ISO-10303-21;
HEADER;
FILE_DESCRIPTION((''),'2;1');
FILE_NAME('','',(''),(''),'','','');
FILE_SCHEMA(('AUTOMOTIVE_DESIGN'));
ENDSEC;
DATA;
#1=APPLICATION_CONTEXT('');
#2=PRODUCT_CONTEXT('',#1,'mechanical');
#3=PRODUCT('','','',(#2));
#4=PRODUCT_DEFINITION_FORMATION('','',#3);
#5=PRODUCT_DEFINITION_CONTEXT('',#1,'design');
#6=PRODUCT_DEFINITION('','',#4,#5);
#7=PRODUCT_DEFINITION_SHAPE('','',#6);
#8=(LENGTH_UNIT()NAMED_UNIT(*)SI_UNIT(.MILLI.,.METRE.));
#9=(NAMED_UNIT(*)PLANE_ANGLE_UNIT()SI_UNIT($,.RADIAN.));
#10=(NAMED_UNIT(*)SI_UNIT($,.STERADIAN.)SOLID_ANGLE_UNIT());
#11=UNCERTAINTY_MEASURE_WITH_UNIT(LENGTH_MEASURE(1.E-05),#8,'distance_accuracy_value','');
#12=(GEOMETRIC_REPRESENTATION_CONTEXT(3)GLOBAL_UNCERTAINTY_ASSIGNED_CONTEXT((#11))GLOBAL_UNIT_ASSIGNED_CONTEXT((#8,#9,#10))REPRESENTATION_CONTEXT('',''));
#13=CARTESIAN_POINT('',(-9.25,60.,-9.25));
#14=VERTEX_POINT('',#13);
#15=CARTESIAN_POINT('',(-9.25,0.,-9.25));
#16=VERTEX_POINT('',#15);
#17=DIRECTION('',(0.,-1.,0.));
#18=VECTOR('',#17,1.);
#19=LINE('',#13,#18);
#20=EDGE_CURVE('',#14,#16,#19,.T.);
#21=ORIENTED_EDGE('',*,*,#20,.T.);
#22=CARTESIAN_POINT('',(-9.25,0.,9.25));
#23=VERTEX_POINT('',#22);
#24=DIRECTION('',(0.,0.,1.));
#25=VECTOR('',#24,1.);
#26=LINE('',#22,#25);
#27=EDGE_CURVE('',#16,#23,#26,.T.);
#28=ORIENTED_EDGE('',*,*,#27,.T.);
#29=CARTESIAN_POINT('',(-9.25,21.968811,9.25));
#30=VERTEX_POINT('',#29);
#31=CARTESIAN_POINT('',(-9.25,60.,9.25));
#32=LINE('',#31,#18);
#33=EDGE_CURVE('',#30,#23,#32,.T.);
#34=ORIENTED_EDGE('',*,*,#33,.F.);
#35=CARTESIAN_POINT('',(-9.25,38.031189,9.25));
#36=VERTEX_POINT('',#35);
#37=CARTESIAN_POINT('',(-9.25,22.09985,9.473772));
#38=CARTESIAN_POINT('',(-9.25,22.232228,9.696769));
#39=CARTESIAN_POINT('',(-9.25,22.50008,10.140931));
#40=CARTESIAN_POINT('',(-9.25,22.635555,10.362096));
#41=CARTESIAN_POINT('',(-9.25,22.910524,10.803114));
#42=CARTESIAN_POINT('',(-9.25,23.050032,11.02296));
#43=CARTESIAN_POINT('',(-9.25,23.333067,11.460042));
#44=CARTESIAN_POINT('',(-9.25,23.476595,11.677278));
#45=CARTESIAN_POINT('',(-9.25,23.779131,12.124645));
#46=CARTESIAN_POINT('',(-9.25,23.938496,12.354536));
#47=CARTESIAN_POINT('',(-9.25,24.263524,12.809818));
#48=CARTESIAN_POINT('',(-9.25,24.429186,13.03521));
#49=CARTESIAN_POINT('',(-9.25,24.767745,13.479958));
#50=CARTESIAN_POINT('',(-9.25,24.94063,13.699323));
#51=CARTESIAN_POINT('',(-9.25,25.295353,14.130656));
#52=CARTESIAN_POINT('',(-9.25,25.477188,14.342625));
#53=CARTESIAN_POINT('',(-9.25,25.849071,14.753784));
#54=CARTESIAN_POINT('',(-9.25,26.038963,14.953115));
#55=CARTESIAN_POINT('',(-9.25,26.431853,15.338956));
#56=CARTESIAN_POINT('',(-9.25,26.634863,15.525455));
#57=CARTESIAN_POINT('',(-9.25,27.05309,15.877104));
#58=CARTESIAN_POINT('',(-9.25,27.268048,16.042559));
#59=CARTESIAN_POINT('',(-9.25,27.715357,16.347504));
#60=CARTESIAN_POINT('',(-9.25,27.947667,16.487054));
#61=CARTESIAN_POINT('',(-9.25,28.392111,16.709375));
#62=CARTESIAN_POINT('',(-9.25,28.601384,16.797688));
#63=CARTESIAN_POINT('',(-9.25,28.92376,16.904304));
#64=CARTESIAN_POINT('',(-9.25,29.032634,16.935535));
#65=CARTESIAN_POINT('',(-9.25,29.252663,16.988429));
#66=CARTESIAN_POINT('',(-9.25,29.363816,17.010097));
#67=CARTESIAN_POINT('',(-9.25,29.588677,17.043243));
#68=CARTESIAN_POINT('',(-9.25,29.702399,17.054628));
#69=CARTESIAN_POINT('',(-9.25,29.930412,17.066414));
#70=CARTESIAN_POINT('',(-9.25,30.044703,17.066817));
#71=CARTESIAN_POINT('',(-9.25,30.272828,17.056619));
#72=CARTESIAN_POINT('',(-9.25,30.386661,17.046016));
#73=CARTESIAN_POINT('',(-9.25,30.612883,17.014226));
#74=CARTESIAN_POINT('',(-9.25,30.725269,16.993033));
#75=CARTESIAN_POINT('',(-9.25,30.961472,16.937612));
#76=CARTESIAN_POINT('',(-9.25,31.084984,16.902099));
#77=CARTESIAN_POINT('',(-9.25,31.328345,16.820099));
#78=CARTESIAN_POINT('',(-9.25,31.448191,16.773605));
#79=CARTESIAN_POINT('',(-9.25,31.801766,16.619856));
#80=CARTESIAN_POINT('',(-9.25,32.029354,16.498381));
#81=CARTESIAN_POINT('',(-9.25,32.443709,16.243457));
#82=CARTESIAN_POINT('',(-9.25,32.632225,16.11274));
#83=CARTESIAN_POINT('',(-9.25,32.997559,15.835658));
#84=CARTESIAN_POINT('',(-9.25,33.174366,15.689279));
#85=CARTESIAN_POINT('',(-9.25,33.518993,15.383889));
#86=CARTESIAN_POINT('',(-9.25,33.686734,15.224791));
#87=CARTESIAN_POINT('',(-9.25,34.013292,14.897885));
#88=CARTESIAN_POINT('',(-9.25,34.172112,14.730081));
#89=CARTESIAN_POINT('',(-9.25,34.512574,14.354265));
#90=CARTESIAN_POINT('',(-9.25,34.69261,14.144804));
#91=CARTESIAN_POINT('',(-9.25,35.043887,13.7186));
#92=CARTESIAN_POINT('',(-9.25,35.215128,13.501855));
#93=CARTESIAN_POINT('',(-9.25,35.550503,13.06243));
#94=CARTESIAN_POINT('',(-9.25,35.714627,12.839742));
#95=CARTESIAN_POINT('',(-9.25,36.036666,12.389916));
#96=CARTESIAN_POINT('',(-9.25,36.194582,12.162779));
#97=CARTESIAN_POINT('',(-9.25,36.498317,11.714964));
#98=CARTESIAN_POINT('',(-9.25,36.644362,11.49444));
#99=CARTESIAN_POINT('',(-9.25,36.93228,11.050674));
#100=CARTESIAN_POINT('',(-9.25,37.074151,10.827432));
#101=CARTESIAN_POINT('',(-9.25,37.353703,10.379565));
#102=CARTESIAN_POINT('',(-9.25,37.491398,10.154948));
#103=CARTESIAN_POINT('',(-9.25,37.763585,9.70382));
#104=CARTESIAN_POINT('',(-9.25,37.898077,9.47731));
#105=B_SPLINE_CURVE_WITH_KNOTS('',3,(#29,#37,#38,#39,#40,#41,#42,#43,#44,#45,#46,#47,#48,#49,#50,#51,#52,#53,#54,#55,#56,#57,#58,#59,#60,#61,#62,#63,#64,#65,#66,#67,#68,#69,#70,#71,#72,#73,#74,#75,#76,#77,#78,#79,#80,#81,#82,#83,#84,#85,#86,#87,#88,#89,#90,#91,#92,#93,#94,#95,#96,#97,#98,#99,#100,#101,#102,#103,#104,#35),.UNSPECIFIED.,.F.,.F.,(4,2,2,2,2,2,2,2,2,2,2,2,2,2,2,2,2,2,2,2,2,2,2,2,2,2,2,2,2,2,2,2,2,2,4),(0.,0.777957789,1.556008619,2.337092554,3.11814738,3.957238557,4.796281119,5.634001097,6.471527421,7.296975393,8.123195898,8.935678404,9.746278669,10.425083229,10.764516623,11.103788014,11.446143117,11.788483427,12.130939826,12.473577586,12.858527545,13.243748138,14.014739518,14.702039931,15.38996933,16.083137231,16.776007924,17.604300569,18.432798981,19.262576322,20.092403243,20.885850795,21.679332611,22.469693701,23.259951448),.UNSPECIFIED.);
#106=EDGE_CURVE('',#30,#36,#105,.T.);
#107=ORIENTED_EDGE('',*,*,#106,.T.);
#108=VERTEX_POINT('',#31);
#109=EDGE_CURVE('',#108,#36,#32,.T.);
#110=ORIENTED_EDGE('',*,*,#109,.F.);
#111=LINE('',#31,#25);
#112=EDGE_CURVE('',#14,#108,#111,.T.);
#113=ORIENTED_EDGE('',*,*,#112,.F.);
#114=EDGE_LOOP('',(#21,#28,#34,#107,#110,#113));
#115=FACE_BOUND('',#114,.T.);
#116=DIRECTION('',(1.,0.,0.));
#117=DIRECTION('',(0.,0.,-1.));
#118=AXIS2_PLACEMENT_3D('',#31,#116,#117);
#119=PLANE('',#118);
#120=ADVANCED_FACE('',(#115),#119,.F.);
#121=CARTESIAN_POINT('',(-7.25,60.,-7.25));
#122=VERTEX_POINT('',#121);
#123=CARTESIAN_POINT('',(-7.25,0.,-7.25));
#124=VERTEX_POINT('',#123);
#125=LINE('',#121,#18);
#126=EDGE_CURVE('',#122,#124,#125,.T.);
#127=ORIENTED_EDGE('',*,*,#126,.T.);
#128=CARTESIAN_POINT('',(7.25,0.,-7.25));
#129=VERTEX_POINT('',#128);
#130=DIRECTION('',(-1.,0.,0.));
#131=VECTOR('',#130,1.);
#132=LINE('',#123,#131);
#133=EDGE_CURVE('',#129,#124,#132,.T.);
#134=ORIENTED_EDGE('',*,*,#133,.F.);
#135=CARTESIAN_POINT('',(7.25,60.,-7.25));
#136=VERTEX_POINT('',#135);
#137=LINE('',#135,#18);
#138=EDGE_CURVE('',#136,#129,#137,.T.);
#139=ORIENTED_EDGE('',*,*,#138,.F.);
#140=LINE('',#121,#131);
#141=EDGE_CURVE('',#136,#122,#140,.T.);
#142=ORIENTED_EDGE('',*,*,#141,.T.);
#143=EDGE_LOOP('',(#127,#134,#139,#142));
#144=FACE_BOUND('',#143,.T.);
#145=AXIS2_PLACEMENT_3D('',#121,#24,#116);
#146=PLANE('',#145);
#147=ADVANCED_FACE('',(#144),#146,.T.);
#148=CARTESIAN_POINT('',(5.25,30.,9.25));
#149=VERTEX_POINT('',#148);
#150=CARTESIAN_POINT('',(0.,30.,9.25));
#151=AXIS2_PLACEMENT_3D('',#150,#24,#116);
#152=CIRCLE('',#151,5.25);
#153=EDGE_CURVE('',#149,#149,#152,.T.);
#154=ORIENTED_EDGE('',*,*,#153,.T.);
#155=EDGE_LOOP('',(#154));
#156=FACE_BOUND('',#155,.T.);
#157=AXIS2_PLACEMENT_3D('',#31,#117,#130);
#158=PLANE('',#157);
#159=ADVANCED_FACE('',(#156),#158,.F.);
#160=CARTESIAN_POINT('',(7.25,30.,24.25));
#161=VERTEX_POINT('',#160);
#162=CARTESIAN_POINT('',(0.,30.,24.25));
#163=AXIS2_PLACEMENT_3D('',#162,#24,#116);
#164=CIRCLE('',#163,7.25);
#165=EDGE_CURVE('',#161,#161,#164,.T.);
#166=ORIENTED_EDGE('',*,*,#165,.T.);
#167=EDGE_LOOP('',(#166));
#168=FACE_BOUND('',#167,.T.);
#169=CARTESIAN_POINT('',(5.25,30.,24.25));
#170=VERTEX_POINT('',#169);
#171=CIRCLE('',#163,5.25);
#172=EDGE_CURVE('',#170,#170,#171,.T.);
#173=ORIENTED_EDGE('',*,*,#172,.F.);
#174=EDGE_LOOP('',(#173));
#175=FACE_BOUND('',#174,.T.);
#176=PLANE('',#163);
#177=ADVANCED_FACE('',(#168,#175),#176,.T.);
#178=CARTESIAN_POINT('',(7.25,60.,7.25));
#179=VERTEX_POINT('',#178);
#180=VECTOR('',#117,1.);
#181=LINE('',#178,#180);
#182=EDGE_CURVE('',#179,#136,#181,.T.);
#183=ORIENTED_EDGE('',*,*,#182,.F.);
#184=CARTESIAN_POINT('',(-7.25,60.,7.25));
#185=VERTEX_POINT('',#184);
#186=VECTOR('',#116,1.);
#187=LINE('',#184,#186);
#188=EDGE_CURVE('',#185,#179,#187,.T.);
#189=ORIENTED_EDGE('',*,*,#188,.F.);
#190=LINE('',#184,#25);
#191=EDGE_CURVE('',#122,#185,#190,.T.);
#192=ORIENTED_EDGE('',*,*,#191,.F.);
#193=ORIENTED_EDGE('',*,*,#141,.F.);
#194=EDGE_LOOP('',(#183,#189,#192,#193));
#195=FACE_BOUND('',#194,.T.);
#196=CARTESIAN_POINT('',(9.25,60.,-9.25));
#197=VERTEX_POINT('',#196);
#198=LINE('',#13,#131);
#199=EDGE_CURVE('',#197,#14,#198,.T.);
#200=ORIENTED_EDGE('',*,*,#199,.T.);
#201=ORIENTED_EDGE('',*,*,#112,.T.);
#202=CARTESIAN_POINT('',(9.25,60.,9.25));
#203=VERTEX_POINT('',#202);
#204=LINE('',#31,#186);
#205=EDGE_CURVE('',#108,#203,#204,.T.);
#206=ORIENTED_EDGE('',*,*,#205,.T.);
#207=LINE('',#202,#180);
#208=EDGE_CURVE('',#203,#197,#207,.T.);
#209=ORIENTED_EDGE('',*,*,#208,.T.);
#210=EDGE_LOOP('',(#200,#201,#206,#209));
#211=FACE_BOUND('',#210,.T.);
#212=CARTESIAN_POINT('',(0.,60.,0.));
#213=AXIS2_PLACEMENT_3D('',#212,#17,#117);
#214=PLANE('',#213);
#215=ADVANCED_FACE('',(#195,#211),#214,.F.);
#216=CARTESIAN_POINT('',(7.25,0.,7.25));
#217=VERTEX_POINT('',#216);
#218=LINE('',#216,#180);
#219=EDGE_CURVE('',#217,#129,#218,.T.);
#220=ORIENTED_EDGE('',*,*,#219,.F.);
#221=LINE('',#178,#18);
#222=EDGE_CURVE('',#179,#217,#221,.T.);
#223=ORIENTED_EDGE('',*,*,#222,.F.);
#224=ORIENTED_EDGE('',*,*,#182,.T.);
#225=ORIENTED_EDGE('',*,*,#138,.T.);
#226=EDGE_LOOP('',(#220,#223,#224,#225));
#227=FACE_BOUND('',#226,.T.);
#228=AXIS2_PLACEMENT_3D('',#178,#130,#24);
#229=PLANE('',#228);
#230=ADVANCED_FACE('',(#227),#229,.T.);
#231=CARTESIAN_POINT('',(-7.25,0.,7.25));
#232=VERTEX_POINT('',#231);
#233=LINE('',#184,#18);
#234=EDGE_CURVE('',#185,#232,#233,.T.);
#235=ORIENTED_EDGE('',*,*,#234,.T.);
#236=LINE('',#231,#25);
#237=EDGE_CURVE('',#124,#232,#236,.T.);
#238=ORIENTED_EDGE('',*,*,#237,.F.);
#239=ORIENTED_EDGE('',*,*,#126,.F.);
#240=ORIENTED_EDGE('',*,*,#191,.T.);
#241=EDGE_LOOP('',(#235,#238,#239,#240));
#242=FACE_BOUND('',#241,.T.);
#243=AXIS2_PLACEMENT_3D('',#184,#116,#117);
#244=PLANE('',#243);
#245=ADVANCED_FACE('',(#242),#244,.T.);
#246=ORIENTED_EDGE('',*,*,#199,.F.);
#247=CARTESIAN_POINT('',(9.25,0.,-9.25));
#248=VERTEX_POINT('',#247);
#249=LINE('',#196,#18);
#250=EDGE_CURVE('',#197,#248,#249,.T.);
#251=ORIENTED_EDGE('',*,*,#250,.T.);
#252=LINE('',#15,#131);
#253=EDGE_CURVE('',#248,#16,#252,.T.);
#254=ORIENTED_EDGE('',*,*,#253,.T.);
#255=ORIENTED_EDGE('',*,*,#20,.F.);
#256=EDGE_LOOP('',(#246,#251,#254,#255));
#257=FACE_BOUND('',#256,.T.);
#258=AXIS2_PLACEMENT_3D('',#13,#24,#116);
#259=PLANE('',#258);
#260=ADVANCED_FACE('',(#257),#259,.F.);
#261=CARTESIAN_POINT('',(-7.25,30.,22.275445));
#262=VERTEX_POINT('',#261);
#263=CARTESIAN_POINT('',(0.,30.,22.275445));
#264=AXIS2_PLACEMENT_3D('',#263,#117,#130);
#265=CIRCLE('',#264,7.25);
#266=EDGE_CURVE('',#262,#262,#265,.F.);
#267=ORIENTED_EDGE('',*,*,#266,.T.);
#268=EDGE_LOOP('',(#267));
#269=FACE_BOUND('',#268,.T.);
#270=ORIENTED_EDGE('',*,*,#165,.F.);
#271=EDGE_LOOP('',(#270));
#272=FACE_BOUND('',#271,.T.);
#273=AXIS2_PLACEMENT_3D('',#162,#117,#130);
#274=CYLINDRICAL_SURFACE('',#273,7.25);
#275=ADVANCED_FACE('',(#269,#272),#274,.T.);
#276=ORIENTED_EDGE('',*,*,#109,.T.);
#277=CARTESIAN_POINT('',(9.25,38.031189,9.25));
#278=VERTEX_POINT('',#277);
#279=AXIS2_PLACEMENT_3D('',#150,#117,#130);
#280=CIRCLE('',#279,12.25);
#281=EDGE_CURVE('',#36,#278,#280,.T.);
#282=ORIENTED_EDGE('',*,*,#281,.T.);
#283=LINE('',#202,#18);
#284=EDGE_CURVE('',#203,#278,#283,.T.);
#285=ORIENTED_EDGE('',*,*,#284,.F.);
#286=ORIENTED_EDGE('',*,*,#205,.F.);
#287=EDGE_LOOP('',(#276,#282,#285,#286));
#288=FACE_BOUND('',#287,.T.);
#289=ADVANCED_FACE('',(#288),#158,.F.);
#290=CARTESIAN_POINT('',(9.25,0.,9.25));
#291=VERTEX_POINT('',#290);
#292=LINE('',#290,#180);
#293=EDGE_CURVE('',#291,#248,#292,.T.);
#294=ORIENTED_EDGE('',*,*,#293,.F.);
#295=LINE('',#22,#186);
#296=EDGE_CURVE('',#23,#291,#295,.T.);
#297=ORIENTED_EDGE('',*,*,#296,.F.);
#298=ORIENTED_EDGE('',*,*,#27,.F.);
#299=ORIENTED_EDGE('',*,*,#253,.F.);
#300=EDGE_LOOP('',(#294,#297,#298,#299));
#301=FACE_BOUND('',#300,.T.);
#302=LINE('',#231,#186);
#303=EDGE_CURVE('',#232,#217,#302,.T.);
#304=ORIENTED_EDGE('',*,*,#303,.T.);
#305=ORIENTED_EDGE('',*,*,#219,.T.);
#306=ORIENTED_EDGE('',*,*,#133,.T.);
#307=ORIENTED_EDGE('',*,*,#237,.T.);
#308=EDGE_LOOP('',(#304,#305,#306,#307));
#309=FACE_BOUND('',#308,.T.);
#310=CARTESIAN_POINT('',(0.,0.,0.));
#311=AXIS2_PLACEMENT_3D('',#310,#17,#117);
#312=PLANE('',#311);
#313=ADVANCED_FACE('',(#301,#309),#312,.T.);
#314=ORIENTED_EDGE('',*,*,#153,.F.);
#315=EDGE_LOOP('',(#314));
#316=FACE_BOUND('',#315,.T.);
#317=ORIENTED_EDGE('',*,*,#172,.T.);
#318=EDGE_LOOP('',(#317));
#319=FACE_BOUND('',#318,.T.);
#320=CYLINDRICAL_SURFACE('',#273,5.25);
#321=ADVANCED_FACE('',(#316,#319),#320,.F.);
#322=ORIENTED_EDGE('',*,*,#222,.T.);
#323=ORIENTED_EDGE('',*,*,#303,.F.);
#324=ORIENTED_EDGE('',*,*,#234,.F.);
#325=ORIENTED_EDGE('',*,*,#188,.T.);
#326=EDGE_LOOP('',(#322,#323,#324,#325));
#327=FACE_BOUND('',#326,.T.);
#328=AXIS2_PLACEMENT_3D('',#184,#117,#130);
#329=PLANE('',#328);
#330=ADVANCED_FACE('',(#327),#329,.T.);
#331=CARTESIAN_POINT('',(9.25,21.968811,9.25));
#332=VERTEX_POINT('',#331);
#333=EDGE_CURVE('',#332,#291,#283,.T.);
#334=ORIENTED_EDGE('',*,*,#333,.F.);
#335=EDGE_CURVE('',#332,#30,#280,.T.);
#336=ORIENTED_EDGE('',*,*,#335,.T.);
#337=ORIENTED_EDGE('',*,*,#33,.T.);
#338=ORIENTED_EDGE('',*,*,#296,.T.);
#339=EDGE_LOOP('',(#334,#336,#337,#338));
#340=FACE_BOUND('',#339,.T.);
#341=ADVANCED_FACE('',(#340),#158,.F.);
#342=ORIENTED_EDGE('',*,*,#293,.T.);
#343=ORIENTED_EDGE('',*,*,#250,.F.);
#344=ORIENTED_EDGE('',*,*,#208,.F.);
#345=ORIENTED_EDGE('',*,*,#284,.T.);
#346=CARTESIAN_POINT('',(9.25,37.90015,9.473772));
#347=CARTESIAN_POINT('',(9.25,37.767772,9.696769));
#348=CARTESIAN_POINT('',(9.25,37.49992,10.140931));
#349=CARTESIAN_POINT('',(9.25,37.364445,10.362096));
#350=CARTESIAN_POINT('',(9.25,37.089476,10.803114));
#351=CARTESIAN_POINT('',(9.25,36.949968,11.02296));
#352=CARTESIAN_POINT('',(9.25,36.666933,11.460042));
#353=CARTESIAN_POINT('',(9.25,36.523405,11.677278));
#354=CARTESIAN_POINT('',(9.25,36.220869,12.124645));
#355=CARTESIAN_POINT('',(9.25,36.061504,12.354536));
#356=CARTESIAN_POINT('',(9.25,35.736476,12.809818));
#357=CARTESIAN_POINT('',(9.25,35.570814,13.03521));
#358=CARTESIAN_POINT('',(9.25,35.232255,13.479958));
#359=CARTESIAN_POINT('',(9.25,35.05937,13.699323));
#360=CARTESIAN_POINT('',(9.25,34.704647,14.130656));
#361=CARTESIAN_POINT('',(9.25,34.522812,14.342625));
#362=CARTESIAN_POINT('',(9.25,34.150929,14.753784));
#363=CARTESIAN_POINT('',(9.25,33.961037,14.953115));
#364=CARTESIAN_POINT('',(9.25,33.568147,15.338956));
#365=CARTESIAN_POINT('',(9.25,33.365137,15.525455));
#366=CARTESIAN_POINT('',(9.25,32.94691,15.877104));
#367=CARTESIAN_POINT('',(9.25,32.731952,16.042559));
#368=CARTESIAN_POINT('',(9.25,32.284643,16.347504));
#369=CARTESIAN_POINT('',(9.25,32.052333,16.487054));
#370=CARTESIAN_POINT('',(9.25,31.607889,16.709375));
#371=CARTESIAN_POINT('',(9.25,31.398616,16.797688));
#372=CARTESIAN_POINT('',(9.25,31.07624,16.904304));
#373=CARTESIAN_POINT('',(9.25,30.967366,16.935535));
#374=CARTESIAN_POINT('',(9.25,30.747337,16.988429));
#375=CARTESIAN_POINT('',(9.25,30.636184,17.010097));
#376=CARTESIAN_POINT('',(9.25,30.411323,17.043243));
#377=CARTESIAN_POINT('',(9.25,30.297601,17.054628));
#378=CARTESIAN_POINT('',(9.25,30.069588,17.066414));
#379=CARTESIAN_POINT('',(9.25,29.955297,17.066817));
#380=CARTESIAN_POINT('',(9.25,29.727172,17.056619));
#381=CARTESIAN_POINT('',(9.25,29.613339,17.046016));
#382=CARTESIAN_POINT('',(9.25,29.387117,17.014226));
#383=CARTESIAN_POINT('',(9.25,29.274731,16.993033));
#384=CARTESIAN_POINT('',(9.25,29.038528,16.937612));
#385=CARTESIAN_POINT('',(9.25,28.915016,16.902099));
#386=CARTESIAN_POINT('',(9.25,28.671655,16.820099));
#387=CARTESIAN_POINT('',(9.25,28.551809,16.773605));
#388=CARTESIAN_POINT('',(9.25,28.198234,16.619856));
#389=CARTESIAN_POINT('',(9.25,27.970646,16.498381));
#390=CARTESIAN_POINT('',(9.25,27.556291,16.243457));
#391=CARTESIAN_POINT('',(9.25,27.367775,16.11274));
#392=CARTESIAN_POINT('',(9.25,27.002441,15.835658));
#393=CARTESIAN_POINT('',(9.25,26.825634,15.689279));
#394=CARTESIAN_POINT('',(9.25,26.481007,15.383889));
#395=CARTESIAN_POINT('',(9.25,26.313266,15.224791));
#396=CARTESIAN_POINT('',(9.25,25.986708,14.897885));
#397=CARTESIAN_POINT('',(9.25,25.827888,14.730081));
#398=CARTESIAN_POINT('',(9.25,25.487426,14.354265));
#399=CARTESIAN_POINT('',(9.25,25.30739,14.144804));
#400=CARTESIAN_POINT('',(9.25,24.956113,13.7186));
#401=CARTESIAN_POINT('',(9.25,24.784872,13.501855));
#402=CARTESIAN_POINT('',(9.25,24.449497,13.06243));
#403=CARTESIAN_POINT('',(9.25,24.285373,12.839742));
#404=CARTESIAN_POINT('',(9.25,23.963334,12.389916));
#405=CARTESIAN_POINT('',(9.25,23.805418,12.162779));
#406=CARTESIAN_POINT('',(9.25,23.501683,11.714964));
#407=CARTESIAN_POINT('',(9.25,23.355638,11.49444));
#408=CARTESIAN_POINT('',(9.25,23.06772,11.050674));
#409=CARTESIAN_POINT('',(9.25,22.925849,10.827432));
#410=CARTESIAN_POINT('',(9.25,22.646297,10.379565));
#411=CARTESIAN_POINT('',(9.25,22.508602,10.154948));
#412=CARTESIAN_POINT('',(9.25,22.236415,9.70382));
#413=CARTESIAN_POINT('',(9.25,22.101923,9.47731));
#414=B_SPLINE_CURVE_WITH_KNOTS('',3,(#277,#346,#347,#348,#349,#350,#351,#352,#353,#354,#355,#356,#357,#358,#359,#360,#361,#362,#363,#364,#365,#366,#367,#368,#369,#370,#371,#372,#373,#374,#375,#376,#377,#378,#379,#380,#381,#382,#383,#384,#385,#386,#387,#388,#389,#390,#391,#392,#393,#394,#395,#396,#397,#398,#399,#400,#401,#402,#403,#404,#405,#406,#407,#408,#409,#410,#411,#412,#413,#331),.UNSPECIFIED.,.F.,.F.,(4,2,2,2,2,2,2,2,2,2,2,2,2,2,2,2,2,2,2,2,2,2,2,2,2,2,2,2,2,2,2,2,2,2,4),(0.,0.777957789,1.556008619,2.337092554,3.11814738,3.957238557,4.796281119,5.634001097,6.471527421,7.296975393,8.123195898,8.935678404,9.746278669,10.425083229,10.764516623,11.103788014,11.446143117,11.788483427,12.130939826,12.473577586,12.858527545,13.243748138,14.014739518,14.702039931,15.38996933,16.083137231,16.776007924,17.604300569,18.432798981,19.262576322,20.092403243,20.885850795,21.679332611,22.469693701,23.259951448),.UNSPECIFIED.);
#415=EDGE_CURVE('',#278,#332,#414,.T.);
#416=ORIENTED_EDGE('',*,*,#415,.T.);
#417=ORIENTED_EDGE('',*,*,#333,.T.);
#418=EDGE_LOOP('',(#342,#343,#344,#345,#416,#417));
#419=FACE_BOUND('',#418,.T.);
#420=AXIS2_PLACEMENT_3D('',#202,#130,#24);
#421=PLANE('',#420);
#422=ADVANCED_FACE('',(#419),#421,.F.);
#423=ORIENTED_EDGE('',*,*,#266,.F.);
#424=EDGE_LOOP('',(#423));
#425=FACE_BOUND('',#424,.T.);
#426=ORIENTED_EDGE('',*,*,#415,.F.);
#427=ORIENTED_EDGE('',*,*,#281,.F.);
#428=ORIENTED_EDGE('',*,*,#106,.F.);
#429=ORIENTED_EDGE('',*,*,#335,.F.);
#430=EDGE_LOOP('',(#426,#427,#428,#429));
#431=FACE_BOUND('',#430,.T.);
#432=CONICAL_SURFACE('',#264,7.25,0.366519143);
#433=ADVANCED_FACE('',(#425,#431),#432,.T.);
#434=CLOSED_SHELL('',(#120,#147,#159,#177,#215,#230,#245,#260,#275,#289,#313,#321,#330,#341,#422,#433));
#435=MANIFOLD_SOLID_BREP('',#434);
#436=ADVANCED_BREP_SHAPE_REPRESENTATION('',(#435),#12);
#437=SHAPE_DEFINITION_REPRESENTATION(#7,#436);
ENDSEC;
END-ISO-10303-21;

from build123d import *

# Parameters (mm, degrees)
SKETCH1_W           = 18.5
SKETCH1_H           = 18.5
SKETCH1_W_2         = 14.5
SKETCH1_H_2         = 14.5
BOSS_EXTRUDE1_DEPTH = 60
SKETCH2_R           = 7.25
SKETCH2_R_2         = 5.25
BOSS_EXTRUDE2_DEPTH = 15
CHAMFER1_SIZE       = 5
CHAMFER1_SIZE_2     = 13.025445323


with BuildPart() as part:
    # Sketch1 → Boss-Extrude1 (new body)
    with BuildSketch(Plane(origin=(0, 0, 0), x_dir=(1, 0, 0), z_dir=(0, 1, 0))):
        Rectangle(SKETCH1_W, SKETCH1_H)
        Rectangle(SKETCH1_W_2, SKETCH1_H_2, mode=Mode.SUBTRACT)
    extrude(amount=BOSS_EXTRUDE1_DEPTH)

    # Sketch2 → Boss-Extrude2 (add)
    with BuildSketch(Plane.XY.offset(9.25)):
        with Locations(Location((0, 30, 0), (0, 0, 180))):
            Circle(SKETCH2_R)
        with Locations((0, 30)):
            Circle(SKETCH2_R_2, mode=Mode.SUBTRACT)
    extrude(amount=BOSS_EXTRUDE2_DEPTH)

    # Chamfer1
    # the kernel refuses this chamfer: 13.025445323, 5 mm, written as the material it adds along each edge
    with BuildSketch(Plane(origin=(0, 30, 9.25), x_dir=(-1, 0, 0), z_dir=(0, 1, 0))) as chamfer1_piece_1_section:
        Polygon((7.25 + CHAMFER1_SIZE, 0), (7.25, CHAMFER1_SIZE_2), (7.25, 0), align=None)
    chamfer1_piece_1 = revolve(axis=Axis((0, 30, 9.25), (0, 0, 1)), mode=Mode.PRIVATE)
    chamfer1_piece_1 = split(chamfer1_piece_1, bisect_by=Plane(origin=(-9.25, 20.104834993, 11.052414917), z_dir=(1, 0, 0)), keep=Keep.TOP, mode=Mode.PRIVATE)
    chamfer1_piece_1 = split(chamfer1_piece_1, bisect_by=Plane(origin=(9.25, 20.104834993, 11.052414917), z_dir=(-1, 0, 0)), keep=Keep.TOP, mode=Mode.PRIVATE)
    add(chamfer1_piece_1)


solid = part.part
